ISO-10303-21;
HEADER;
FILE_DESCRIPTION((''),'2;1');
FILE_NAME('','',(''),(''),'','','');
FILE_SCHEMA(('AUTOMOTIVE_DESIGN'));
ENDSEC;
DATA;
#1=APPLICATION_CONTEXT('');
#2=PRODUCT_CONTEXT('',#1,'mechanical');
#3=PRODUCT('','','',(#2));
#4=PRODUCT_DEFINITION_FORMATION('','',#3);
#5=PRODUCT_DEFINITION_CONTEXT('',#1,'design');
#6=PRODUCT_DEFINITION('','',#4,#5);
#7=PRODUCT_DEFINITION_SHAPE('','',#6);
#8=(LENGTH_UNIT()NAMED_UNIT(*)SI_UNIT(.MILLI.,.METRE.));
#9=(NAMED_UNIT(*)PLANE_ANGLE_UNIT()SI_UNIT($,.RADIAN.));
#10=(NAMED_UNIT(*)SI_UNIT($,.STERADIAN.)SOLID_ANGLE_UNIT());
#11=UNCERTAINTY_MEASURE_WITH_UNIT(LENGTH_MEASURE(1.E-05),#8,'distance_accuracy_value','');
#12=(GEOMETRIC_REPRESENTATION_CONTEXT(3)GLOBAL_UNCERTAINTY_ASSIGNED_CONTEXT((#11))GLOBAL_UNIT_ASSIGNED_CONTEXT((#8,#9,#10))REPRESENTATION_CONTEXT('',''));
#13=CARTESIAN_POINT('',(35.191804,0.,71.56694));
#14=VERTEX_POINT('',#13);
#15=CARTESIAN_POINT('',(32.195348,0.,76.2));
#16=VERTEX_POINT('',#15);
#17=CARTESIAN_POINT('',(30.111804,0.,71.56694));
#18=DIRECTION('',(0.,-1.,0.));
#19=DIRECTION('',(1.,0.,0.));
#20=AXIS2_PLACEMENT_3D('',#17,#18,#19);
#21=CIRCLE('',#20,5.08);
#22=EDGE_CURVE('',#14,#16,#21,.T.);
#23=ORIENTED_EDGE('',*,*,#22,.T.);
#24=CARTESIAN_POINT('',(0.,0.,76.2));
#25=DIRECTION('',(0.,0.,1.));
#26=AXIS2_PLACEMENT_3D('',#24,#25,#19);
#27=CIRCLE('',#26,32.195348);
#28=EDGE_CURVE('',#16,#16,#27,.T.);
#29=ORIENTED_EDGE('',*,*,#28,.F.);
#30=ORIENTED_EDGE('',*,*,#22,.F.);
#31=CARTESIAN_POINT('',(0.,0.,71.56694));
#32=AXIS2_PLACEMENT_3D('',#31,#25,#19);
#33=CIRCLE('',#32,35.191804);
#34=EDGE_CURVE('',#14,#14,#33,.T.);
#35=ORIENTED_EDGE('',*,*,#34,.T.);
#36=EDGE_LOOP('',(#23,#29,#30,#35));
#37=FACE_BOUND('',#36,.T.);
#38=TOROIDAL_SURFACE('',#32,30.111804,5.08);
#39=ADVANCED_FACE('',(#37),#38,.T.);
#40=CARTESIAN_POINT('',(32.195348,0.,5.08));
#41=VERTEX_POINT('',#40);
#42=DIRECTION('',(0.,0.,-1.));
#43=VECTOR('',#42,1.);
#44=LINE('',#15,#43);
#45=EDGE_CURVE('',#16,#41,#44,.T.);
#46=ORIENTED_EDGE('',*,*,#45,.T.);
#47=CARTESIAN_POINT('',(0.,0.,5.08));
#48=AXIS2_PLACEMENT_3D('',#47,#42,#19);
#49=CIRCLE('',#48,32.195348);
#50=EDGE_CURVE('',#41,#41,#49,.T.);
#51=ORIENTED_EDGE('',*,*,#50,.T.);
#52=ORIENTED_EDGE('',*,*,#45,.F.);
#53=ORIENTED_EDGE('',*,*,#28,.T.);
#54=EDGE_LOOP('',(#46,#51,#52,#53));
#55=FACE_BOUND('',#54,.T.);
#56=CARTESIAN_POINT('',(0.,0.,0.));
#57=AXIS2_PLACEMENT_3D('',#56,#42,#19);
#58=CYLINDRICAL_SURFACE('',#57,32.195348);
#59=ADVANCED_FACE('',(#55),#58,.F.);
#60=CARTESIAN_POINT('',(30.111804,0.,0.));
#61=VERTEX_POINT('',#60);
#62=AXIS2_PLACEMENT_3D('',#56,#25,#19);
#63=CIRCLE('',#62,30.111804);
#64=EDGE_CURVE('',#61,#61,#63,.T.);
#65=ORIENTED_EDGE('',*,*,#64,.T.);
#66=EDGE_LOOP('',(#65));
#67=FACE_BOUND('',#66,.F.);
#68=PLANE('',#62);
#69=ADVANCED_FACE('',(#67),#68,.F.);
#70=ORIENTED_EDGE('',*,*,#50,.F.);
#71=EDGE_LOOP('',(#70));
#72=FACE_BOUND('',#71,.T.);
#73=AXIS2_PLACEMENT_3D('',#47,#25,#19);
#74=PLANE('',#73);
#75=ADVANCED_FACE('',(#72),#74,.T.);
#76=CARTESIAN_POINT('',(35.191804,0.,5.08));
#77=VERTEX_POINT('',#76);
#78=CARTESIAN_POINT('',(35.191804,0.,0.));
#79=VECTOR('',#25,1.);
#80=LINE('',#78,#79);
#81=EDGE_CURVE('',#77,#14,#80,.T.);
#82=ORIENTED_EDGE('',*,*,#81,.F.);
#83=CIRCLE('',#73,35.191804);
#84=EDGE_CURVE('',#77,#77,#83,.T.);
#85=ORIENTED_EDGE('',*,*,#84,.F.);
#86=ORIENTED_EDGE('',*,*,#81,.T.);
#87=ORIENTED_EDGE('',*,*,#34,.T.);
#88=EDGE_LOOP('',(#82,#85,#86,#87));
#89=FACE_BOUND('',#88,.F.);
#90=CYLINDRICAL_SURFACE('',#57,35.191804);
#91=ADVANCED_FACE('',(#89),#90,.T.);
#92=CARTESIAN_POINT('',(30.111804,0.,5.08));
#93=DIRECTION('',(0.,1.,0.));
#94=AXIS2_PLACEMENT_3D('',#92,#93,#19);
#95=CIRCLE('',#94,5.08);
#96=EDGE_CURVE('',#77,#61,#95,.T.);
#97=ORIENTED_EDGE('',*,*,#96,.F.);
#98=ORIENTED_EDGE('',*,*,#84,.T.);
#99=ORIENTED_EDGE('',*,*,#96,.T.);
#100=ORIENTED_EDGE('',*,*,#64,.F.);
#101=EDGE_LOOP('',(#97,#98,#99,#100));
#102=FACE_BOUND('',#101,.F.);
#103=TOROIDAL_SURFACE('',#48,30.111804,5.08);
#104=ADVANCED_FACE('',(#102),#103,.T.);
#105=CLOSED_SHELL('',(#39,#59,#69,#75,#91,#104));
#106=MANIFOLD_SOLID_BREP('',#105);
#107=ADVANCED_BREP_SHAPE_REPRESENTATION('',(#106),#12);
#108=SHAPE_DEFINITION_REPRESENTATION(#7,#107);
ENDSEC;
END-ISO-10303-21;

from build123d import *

# Parameters (mm, degrees)
F0_R     = 35.1918039157
F0_R_2   = 32.1953483685
F1_DEPTH = 76.2
F2_R     = 32.3619663376
F3_DEPTH = 25.4
F4_DEPTH = 20.32


# Not quite as in the source:
# - a fillet or chamfer that OpenCascade refuses, or shapes differently, is made with other operations: its cross-section is extruded or revolved along the edge and cut away or added


with BuildPart() as f1:
    # F0 (on Top) → F1 (new body)
    with BuildSketch(Plane.XY):
        Circle(F0_R)
        Circle(F0_R_2, mode=Mode.SUBTRACT)
    extrude(amount=F1_DEPTH)

    # F2 (on Top) → F3 (join)
    with BuildSketch(Plane.XY):
        Circle(F2_R)
    extrude(amount=F3_DEPTH)

    # F4 (cut): a face of the model
    f4_faces = [f1.faces().sort_by_distance(p)[0] for p in [
        (0, 0, 25.4),
    ]]
    extrude(f4_faces, amount=-F4_DEPTH, mode=Mode.SUBTRACT)

    # F5: fillet of radius 5.08 on 2 edges, made by hand

    # F5_s1 → F5_t2 (revolve, cut)
    with BuildSketch(Plane.XZ):
        with BuildLine():
            ThreePointArc((35.1918039157, 71.5669402644), (34.377410896, 74.3257438258), (32.1953483685, 76.2))
            Line((32.1953483685, 76.2), (32.2370192575, 76.2926611947))
            ThreePointArc((32.2370192575, 76.2926611947), (33.6935761421, 76.3016), (35.1918039157, 76.3016))
            Line((35.1918039157, 76.3016), (35.2934039157, 76.2))
            Line((35.2934039157, 76.2), (35.2934039157, 71.5669402644))
            Line((35.2934039157, 71.5669402644), (35.1918039157, 71.5669402644))
        make_face()
    revolve(axis=Axis((0, 0, 76.2), (0, 0, 1)), mode=Mode.SUBTRACT)

    # F5_s3 → F5_t4 (revolve, cut)
    with BuildSketch(Plane.XZ):
        with BuildLine():
            ThreePointArc((35.1918039157, 5.08), (33.7039063642, 1.4878975516), (30.1118039157, 0))
            Line((30.1118039157, 0), (30.1118039157, -0.1016))
            Line((30.1118039157, -0.1016), (35.2934039157, -0.1016))
            Line((35.2934039157, -0.1016), (35.2934039157, 5.08))
            Line((35.2934039157, 5.08), (35.1918039157, 5.08))
        make_face()
    revolve(axis=Axis((0, 0, 0), (0, 0, 1)), mode=Mode.SUBTRACT)


solid = f1.part
